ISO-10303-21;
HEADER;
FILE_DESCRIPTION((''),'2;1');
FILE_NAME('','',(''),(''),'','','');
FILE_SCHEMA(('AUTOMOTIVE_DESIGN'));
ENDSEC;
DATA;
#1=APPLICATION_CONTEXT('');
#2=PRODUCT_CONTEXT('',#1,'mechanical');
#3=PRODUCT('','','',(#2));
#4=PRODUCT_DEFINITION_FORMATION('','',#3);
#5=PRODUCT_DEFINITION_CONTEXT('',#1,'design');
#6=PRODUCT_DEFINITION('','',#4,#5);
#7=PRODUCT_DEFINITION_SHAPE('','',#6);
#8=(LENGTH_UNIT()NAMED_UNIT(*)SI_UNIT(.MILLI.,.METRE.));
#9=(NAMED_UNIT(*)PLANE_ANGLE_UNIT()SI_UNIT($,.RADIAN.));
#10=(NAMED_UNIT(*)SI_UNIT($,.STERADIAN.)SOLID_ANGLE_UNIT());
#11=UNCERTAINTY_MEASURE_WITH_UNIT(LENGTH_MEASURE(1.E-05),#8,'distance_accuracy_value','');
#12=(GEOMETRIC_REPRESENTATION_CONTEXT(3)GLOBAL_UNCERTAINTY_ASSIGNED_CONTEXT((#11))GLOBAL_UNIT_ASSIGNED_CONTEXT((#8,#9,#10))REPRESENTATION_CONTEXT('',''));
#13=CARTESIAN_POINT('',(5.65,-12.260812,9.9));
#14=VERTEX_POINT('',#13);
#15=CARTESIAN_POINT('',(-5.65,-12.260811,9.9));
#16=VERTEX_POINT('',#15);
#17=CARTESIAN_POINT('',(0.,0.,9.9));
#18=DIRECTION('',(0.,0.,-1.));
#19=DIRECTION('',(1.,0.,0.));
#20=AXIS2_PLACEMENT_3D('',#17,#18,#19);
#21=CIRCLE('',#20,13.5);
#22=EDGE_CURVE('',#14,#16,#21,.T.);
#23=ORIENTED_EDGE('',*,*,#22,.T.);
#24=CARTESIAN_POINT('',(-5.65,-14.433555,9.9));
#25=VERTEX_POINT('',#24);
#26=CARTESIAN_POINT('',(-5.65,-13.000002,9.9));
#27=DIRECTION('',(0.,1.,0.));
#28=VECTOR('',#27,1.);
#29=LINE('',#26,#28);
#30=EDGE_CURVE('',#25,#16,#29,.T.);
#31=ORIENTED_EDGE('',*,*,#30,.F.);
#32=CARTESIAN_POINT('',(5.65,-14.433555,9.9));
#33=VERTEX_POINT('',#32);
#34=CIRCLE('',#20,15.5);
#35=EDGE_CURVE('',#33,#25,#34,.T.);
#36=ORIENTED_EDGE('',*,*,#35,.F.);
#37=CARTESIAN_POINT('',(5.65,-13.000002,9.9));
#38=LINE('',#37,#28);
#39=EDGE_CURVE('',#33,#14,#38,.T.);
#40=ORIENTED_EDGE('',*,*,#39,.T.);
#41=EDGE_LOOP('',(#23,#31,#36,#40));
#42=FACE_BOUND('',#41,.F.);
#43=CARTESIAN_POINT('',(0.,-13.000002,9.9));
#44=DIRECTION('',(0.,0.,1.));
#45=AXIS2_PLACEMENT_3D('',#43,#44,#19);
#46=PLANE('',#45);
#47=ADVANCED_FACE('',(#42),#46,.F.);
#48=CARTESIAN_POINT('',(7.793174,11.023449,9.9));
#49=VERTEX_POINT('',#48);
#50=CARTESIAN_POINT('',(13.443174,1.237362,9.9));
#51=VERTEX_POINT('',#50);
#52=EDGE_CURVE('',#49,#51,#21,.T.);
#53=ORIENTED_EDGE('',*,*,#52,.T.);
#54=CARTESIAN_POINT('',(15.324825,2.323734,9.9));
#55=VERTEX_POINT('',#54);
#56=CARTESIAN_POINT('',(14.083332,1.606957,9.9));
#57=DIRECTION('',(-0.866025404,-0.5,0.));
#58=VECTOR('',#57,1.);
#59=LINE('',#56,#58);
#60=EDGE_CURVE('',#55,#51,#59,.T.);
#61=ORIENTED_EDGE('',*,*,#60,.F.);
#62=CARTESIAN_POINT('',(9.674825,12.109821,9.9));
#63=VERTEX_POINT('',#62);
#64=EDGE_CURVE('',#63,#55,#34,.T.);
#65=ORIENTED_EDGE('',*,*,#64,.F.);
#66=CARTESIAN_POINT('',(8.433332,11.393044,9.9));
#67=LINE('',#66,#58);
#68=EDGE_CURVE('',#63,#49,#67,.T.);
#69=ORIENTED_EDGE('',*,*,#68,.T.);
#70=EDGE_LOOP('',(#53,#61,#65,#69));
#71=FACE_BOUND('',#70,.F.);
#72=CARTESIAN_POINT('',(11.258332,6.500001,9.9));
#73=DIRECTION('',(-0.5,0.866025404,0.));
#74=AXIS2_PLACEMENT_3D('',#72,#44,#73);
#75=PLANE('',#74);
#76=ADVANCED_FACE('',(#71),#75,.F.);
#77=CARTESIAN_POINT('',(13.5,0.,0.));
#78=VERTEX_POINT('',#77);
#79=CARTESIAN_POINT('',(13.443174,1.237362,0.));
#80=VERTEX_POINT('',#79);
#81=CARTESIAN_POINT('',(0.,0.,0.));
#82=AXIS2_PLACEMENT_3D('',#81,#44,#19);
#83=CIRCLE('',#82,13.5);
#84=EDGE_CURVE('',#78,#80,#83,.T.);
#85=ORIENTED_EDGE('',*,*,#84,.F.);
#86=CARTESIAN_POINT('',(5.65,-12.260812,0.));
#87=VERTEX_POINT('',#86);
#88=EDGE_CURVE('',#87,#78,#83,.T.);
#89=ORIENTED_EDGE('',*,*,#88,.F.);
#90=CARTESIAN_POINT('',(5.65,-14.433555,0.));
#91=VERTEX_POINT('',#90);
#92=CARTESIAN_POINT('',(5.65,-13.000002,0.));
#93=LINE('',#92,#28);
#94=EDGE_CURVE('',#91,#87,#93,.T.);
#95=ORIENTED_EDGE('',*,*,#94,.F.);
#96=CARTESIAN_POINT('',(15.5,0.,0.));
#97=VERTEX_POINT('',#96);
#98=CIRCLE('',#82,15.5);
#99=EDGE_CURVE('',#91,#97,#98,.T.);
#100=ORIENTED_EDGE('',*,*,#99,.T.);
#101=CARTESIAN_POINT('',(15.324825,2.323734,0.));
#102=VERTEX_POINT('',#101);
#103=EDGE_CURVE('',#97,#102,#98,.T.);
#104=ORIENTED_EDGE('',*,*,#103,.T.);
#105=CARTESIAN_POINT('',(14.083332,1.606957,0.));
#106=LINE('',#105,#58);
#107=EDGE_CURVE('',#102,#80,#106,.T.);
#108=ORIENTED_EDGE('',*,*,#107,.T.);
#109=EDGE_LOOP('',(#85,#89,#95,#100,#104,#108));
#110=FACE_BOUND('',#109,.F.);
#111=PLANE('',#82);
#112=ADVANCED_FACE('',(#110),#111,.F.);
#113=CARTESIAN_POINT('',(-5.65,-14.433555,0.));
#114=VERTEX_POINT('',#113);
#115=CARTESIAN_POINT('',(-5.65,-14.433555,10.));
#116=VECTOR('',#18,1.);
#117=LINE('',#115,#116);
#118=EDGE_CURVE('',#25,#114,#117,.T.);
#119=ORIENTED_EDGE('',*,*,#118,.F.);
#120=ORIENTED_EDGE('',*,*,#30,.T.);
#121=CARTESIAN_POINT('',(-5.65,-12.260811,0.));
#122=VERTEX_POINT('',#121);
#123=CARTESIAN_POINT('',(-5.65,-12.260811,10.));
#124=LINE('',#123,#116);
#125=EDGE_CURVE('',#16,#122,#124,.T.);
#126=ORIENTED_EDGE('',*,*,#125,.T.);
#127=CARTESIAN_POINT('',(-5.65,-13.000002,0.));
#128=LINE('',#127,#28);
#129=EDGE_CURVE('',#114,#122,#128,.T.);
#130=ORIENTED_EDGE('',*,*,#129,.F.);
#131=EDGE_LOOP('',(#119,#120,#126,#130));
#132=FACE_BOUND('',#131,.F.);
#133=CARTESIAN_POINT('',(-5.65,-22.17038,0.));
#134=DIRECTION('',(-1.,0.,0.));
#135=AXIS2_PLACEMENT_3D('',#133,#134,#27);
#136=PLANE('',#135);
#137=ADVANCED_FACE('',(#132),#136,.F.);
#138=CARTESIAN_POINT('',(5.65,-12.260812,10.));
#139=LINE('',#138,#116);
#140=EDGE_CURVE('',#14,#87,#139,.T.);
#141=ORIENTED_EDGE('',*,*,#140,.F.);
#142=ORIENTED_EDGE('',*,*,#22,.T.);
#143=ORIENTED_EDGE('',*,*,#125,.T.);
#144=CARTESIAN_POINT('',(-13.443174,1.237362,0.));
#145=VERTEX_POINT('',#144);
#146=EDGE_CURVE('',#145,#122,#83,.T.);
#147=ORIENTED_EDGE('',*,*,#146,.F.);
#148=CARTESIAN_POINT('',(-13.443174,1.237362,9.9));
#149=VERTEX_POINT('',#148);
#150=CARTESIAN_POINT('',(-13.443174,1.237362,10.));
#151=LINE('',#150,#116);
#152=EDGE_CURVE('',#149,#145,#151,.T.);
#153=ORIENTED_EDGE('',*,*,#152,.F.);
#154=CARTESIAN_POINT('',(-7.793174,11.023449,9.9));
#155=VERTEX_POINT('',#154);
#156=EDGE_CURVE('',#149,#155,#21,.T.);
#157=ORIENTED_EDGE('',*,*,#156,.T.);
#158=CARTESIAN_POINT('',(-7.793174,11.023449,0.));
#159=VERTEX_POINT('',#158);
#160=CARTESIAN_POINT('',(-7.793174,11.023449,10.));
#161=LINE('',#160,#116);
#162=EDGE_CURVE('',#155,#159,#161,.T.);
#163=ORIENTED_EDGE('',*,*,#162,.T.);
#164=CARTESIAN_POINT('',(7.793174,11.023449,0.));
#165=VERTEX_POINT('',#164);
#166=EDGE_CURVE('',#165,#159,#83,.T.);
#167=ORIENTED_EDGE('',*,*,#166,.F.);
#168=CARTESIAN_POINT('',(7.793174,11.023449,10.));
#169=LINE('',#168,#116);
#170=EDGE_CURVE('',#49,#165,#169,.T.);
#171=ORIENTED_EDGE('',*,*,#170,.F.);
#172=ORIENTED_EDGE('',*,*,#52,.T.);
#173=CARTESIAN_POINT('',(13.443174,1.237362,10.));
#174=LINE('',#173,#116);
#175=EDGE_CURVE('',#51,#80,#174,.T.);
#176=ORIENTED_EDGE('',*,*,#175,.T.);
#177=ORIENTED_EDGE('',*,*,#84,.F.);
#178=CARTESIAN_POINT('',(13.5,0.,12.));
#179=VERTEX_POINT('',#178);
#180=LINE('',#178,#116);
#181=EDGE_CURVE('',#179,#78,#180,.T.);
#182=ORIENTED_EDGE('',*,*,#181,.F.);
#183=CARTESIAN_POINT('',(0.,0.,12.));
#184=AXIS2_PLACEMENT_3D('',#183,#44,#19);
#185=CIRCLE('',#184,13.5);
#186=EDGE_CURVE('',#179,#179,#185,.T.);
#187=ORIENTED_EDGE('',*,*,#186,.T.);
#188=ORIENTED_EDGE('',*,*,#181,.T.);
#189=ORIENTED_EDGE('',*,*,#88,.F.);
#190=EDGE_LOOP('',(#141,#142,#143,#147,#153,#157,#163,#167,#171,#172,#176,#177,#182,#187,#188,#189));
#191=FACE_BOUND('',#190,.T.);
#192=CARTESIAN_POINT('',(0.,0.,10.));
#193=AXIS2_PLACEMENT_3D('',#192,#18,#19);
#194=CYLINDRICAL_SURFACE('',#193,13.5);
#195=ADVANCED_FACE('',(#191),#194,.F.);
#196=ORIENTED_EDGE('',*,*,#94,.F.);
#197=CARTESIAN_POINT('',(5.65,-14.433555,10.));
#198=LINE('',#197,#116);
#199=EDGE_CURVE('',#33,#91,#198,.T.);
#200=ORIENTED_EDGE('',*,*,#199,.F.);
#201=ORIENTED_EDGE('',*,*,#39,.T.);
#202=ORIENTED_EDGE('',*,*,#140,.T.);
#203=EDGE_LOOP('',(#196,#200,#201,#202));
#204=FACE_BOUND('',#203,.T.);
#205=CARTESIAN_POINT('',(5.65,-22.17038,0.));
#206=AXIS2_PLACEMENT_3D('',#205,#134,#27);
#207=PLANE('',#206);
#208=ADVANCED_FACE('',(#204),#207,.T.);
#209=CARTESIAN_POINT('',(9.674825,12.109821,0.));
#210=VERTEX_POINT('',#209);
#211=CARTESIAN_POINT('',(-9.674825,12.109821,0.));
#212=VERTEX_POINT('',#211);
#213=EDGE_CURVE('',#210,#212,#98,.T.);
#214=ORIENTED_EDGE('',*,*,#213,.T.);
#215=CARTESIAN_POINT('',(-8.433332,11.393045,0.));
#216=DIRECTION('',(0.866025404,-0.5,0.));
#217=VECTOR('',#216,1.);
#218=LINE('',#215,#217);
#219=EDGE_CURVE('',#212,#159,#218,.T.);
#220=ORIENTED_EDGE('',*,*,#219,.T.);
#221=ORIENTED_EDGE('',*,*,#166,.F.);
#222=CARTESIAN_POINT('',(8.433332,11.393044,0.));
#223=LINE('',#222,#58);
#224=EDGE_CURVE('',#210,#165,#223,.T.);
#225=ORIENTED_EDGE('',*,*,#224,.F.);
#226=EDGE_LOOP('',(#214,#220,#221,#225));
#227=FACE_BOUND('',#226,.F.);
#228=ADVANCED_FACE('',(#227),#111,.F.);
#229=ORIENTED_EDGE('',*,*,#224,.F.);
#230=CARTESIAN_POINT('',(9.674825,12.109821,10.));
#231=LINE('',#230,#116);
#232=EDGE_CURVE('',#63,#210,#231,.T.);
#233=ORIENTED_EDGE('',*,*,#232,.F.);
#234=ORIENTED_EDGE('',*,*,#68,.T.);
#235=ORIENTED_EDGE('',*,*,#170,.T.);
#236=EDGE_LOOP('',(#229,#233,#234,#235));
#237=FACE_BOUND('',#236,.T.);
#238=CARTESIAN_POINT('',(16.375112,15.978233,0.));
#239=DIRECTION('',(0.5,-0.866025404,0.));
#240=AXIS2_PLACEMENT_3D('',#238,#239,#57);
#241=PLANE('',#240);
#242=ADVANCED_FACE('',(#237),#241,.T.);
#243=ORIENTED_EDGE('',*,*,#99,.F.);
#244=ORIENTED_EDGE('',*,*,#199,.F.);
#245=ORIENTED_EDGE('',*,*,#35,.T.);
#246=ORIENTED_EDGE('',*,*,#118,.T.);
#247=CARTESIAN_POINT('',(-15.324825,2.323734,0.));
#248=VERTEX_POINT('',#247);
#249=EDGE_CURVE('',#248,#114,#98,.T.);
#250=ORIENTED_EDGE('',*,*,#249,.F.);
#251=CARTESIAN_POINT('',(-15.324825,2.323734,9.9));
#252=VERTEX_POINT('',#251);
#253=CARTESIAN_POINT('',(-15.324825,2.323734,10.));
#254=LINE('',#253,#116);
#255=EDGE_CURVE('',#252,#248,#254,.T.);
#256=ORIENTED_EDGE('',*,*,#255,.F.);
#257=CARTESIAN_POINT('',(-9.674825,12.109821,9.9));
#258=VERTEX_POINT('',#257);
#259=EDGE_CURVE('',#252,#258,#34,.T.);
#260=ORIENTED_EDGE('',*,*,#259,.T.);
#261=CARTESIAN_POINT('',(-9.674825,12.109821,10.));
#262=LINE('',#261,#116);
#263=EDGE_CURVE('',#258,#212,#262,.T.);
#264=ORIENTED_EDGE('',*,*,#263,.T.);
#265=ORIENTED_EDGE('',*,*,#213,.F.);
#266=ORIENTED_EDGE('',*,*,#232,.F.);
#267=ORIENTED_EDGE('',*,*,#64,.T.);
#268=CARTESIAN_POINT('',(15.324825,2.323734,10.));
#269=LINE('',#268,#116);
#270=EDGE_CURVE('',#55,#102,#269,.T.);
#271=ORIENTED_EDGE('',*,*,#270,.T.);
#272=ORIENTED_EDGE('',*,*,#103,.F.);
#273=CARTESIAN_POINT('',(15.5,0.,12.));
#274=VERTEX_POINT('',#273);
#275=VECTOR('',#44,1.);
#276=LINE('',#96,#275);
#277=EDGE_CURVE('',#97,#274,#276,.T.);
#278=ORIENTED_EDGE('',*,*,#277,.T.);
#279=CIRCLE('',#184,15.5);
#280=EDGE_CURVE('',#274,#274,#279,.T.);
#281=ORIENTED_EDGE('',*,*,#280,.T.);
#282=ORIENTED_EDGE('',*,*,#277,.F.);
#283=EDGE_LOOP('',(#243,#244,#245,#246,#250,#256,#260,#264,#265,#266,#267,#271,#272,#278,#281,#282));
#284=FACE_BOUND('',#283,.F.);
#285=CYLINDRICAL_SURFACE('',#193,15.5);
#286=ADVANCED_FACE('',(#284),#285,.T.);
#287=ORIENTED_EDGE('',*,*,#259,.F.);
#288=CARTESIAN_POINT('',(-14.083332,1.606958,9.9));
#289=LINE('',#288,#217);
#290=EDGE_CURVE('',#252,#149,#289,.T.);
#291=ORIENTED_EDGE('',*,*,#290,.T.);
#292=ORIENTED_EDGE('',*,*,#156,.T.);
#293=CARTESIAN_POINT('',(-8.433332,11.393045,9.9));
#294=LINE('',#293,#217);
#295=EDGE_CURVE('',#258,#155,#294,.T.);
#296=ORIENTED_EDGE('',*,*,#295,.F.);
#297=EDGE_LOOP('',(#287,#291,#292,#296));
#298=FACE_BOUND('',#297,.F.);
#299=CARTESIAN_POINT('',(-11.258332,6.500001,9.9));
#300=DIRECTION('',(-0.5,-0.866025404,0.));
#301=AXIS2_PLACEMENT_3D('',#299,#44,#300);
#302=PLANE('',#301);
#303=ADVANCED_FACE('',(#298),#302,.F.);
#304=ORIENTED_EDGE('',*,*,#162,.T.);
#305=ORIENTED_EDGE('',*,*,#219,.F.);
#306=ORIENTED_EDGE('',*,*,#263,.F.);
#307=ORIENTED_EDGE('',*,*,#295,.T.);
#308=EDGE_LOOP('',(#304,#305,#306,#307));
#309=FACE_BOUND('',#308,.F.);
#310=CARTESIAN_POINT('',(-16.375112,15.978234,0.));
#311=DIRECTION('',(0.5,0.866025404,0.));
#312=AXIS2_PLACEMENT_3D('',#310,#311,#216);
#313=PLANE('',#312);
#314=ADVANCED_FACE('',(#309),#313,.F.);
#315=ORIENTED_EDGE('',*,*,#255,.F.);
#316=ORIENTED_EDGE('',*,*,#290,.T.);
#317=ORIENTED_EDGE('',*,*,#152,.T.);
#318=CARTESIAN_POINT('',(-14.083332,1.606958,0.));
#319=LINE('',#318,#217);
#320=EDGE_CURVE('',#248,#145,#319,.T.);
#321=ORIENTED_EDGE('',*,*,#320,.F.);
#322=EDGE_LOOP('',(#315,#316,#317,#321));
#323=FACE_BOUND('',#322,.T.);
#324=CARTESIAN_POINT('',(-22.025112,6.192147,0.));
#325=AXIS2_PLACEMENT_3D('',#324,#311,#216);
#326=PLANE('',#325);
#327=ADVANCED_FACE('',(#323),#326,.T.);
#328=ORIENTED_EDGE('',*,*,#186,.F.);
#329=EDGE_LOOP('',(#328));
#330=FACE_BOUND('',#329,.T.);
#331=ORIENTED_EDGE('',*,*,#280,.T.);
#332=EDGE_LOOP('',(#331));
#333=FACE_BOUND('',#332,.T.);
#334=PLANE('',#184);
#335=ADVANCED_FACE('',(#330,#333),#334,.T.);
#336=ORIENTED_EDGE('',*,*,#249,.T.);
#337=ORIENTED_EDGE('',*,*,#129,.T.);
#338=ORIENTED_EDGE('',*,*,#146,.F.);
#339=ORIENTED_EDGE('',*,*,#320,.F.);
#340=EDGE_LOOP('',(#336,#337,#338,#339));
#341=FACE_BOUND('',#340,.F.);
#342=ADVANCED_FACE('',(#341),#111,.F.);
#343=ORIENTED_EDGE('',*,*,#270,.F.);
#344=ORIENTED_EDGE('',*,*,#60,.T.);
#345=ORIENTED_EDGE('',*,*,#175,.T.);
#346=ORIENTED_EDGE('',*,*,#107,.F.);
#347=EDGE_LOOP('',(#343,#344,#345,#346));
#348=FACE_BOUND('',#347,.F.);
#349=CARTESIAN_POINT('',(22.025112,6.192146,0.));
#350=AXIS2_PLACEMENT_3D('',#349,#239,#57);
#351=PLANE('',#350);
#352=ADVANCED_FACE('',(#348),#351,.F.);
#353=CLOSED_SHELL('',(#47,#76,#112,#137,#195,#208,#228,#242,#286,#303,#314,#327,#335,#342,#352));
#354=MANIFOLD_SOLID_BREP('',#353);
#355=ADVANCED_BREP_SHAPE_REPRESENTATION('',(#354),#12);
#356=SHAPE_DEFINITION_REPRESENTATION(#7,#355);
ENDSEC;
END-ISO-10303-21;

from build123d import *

# Parameters (mm, degrees)
F0_R      = 15.5
F0_R_2    = 13.5
F1_DEPTH  = 10
F3_R      = 15.5
F3_R_2    = 13.5
F4_DEPTH  = 2
F5_W      = 11.3
F5_H      = 18.3407559019
F6_DEPTH  = 9.9
F7_COUNT  = 3
F9_R      = 8
F10_DEPTH = 25


# Not quite as in the source:
# - the program builds the solid bodies; features that only make, move or delete a surface that nothing else refers to are left out


with BuildPart() as f1:
    # F0 (on Top) → F1 (new body)
    with BuildSketch(Plane.XY):
        Circle(F0_R)
        Circle(F0_R_2, mode=Mode.SUBTRACT)
    extrude(amount=F1_DEPTH)

    # F3 (on offset) → F4 (join)
    with BuildSketch(Plane.XY.offset(10)):
        Circle(F3_R)
        Circle(F3_R_2, mode=Mode.SUBTRACT)
    extrude(amount=F4_DEPTH)

    # F5 (on Top) → F6 (cut)
    with BuildSketch(Plane.XY):
        with Locations((-1.81e-07, -13.0000018069)):
            Rectangle(F5_W, F5_H)
    f6 = extrude(amount=F6_DEPTH, mode=Mode.SUBTRACT)

    # F7: F6 ×3 about axis
    f7_axis = Axis((0, 0, 0), (0, 0, -1))
    for i in range(1, F7_COUNT):
        add(f6.rotate(f7_axis, i * 360 / F7_COUNT), mode=Mode.SUBTRACT)

    # F9 (on offset) → F10 (cut)
    with BuildSketch(Plane.XY.offset(22)):
        Circle(F9_R)
    extrude(amount=-F10_DEPTH, mode=Mode.SUBTRACT)


solid = f1.part
